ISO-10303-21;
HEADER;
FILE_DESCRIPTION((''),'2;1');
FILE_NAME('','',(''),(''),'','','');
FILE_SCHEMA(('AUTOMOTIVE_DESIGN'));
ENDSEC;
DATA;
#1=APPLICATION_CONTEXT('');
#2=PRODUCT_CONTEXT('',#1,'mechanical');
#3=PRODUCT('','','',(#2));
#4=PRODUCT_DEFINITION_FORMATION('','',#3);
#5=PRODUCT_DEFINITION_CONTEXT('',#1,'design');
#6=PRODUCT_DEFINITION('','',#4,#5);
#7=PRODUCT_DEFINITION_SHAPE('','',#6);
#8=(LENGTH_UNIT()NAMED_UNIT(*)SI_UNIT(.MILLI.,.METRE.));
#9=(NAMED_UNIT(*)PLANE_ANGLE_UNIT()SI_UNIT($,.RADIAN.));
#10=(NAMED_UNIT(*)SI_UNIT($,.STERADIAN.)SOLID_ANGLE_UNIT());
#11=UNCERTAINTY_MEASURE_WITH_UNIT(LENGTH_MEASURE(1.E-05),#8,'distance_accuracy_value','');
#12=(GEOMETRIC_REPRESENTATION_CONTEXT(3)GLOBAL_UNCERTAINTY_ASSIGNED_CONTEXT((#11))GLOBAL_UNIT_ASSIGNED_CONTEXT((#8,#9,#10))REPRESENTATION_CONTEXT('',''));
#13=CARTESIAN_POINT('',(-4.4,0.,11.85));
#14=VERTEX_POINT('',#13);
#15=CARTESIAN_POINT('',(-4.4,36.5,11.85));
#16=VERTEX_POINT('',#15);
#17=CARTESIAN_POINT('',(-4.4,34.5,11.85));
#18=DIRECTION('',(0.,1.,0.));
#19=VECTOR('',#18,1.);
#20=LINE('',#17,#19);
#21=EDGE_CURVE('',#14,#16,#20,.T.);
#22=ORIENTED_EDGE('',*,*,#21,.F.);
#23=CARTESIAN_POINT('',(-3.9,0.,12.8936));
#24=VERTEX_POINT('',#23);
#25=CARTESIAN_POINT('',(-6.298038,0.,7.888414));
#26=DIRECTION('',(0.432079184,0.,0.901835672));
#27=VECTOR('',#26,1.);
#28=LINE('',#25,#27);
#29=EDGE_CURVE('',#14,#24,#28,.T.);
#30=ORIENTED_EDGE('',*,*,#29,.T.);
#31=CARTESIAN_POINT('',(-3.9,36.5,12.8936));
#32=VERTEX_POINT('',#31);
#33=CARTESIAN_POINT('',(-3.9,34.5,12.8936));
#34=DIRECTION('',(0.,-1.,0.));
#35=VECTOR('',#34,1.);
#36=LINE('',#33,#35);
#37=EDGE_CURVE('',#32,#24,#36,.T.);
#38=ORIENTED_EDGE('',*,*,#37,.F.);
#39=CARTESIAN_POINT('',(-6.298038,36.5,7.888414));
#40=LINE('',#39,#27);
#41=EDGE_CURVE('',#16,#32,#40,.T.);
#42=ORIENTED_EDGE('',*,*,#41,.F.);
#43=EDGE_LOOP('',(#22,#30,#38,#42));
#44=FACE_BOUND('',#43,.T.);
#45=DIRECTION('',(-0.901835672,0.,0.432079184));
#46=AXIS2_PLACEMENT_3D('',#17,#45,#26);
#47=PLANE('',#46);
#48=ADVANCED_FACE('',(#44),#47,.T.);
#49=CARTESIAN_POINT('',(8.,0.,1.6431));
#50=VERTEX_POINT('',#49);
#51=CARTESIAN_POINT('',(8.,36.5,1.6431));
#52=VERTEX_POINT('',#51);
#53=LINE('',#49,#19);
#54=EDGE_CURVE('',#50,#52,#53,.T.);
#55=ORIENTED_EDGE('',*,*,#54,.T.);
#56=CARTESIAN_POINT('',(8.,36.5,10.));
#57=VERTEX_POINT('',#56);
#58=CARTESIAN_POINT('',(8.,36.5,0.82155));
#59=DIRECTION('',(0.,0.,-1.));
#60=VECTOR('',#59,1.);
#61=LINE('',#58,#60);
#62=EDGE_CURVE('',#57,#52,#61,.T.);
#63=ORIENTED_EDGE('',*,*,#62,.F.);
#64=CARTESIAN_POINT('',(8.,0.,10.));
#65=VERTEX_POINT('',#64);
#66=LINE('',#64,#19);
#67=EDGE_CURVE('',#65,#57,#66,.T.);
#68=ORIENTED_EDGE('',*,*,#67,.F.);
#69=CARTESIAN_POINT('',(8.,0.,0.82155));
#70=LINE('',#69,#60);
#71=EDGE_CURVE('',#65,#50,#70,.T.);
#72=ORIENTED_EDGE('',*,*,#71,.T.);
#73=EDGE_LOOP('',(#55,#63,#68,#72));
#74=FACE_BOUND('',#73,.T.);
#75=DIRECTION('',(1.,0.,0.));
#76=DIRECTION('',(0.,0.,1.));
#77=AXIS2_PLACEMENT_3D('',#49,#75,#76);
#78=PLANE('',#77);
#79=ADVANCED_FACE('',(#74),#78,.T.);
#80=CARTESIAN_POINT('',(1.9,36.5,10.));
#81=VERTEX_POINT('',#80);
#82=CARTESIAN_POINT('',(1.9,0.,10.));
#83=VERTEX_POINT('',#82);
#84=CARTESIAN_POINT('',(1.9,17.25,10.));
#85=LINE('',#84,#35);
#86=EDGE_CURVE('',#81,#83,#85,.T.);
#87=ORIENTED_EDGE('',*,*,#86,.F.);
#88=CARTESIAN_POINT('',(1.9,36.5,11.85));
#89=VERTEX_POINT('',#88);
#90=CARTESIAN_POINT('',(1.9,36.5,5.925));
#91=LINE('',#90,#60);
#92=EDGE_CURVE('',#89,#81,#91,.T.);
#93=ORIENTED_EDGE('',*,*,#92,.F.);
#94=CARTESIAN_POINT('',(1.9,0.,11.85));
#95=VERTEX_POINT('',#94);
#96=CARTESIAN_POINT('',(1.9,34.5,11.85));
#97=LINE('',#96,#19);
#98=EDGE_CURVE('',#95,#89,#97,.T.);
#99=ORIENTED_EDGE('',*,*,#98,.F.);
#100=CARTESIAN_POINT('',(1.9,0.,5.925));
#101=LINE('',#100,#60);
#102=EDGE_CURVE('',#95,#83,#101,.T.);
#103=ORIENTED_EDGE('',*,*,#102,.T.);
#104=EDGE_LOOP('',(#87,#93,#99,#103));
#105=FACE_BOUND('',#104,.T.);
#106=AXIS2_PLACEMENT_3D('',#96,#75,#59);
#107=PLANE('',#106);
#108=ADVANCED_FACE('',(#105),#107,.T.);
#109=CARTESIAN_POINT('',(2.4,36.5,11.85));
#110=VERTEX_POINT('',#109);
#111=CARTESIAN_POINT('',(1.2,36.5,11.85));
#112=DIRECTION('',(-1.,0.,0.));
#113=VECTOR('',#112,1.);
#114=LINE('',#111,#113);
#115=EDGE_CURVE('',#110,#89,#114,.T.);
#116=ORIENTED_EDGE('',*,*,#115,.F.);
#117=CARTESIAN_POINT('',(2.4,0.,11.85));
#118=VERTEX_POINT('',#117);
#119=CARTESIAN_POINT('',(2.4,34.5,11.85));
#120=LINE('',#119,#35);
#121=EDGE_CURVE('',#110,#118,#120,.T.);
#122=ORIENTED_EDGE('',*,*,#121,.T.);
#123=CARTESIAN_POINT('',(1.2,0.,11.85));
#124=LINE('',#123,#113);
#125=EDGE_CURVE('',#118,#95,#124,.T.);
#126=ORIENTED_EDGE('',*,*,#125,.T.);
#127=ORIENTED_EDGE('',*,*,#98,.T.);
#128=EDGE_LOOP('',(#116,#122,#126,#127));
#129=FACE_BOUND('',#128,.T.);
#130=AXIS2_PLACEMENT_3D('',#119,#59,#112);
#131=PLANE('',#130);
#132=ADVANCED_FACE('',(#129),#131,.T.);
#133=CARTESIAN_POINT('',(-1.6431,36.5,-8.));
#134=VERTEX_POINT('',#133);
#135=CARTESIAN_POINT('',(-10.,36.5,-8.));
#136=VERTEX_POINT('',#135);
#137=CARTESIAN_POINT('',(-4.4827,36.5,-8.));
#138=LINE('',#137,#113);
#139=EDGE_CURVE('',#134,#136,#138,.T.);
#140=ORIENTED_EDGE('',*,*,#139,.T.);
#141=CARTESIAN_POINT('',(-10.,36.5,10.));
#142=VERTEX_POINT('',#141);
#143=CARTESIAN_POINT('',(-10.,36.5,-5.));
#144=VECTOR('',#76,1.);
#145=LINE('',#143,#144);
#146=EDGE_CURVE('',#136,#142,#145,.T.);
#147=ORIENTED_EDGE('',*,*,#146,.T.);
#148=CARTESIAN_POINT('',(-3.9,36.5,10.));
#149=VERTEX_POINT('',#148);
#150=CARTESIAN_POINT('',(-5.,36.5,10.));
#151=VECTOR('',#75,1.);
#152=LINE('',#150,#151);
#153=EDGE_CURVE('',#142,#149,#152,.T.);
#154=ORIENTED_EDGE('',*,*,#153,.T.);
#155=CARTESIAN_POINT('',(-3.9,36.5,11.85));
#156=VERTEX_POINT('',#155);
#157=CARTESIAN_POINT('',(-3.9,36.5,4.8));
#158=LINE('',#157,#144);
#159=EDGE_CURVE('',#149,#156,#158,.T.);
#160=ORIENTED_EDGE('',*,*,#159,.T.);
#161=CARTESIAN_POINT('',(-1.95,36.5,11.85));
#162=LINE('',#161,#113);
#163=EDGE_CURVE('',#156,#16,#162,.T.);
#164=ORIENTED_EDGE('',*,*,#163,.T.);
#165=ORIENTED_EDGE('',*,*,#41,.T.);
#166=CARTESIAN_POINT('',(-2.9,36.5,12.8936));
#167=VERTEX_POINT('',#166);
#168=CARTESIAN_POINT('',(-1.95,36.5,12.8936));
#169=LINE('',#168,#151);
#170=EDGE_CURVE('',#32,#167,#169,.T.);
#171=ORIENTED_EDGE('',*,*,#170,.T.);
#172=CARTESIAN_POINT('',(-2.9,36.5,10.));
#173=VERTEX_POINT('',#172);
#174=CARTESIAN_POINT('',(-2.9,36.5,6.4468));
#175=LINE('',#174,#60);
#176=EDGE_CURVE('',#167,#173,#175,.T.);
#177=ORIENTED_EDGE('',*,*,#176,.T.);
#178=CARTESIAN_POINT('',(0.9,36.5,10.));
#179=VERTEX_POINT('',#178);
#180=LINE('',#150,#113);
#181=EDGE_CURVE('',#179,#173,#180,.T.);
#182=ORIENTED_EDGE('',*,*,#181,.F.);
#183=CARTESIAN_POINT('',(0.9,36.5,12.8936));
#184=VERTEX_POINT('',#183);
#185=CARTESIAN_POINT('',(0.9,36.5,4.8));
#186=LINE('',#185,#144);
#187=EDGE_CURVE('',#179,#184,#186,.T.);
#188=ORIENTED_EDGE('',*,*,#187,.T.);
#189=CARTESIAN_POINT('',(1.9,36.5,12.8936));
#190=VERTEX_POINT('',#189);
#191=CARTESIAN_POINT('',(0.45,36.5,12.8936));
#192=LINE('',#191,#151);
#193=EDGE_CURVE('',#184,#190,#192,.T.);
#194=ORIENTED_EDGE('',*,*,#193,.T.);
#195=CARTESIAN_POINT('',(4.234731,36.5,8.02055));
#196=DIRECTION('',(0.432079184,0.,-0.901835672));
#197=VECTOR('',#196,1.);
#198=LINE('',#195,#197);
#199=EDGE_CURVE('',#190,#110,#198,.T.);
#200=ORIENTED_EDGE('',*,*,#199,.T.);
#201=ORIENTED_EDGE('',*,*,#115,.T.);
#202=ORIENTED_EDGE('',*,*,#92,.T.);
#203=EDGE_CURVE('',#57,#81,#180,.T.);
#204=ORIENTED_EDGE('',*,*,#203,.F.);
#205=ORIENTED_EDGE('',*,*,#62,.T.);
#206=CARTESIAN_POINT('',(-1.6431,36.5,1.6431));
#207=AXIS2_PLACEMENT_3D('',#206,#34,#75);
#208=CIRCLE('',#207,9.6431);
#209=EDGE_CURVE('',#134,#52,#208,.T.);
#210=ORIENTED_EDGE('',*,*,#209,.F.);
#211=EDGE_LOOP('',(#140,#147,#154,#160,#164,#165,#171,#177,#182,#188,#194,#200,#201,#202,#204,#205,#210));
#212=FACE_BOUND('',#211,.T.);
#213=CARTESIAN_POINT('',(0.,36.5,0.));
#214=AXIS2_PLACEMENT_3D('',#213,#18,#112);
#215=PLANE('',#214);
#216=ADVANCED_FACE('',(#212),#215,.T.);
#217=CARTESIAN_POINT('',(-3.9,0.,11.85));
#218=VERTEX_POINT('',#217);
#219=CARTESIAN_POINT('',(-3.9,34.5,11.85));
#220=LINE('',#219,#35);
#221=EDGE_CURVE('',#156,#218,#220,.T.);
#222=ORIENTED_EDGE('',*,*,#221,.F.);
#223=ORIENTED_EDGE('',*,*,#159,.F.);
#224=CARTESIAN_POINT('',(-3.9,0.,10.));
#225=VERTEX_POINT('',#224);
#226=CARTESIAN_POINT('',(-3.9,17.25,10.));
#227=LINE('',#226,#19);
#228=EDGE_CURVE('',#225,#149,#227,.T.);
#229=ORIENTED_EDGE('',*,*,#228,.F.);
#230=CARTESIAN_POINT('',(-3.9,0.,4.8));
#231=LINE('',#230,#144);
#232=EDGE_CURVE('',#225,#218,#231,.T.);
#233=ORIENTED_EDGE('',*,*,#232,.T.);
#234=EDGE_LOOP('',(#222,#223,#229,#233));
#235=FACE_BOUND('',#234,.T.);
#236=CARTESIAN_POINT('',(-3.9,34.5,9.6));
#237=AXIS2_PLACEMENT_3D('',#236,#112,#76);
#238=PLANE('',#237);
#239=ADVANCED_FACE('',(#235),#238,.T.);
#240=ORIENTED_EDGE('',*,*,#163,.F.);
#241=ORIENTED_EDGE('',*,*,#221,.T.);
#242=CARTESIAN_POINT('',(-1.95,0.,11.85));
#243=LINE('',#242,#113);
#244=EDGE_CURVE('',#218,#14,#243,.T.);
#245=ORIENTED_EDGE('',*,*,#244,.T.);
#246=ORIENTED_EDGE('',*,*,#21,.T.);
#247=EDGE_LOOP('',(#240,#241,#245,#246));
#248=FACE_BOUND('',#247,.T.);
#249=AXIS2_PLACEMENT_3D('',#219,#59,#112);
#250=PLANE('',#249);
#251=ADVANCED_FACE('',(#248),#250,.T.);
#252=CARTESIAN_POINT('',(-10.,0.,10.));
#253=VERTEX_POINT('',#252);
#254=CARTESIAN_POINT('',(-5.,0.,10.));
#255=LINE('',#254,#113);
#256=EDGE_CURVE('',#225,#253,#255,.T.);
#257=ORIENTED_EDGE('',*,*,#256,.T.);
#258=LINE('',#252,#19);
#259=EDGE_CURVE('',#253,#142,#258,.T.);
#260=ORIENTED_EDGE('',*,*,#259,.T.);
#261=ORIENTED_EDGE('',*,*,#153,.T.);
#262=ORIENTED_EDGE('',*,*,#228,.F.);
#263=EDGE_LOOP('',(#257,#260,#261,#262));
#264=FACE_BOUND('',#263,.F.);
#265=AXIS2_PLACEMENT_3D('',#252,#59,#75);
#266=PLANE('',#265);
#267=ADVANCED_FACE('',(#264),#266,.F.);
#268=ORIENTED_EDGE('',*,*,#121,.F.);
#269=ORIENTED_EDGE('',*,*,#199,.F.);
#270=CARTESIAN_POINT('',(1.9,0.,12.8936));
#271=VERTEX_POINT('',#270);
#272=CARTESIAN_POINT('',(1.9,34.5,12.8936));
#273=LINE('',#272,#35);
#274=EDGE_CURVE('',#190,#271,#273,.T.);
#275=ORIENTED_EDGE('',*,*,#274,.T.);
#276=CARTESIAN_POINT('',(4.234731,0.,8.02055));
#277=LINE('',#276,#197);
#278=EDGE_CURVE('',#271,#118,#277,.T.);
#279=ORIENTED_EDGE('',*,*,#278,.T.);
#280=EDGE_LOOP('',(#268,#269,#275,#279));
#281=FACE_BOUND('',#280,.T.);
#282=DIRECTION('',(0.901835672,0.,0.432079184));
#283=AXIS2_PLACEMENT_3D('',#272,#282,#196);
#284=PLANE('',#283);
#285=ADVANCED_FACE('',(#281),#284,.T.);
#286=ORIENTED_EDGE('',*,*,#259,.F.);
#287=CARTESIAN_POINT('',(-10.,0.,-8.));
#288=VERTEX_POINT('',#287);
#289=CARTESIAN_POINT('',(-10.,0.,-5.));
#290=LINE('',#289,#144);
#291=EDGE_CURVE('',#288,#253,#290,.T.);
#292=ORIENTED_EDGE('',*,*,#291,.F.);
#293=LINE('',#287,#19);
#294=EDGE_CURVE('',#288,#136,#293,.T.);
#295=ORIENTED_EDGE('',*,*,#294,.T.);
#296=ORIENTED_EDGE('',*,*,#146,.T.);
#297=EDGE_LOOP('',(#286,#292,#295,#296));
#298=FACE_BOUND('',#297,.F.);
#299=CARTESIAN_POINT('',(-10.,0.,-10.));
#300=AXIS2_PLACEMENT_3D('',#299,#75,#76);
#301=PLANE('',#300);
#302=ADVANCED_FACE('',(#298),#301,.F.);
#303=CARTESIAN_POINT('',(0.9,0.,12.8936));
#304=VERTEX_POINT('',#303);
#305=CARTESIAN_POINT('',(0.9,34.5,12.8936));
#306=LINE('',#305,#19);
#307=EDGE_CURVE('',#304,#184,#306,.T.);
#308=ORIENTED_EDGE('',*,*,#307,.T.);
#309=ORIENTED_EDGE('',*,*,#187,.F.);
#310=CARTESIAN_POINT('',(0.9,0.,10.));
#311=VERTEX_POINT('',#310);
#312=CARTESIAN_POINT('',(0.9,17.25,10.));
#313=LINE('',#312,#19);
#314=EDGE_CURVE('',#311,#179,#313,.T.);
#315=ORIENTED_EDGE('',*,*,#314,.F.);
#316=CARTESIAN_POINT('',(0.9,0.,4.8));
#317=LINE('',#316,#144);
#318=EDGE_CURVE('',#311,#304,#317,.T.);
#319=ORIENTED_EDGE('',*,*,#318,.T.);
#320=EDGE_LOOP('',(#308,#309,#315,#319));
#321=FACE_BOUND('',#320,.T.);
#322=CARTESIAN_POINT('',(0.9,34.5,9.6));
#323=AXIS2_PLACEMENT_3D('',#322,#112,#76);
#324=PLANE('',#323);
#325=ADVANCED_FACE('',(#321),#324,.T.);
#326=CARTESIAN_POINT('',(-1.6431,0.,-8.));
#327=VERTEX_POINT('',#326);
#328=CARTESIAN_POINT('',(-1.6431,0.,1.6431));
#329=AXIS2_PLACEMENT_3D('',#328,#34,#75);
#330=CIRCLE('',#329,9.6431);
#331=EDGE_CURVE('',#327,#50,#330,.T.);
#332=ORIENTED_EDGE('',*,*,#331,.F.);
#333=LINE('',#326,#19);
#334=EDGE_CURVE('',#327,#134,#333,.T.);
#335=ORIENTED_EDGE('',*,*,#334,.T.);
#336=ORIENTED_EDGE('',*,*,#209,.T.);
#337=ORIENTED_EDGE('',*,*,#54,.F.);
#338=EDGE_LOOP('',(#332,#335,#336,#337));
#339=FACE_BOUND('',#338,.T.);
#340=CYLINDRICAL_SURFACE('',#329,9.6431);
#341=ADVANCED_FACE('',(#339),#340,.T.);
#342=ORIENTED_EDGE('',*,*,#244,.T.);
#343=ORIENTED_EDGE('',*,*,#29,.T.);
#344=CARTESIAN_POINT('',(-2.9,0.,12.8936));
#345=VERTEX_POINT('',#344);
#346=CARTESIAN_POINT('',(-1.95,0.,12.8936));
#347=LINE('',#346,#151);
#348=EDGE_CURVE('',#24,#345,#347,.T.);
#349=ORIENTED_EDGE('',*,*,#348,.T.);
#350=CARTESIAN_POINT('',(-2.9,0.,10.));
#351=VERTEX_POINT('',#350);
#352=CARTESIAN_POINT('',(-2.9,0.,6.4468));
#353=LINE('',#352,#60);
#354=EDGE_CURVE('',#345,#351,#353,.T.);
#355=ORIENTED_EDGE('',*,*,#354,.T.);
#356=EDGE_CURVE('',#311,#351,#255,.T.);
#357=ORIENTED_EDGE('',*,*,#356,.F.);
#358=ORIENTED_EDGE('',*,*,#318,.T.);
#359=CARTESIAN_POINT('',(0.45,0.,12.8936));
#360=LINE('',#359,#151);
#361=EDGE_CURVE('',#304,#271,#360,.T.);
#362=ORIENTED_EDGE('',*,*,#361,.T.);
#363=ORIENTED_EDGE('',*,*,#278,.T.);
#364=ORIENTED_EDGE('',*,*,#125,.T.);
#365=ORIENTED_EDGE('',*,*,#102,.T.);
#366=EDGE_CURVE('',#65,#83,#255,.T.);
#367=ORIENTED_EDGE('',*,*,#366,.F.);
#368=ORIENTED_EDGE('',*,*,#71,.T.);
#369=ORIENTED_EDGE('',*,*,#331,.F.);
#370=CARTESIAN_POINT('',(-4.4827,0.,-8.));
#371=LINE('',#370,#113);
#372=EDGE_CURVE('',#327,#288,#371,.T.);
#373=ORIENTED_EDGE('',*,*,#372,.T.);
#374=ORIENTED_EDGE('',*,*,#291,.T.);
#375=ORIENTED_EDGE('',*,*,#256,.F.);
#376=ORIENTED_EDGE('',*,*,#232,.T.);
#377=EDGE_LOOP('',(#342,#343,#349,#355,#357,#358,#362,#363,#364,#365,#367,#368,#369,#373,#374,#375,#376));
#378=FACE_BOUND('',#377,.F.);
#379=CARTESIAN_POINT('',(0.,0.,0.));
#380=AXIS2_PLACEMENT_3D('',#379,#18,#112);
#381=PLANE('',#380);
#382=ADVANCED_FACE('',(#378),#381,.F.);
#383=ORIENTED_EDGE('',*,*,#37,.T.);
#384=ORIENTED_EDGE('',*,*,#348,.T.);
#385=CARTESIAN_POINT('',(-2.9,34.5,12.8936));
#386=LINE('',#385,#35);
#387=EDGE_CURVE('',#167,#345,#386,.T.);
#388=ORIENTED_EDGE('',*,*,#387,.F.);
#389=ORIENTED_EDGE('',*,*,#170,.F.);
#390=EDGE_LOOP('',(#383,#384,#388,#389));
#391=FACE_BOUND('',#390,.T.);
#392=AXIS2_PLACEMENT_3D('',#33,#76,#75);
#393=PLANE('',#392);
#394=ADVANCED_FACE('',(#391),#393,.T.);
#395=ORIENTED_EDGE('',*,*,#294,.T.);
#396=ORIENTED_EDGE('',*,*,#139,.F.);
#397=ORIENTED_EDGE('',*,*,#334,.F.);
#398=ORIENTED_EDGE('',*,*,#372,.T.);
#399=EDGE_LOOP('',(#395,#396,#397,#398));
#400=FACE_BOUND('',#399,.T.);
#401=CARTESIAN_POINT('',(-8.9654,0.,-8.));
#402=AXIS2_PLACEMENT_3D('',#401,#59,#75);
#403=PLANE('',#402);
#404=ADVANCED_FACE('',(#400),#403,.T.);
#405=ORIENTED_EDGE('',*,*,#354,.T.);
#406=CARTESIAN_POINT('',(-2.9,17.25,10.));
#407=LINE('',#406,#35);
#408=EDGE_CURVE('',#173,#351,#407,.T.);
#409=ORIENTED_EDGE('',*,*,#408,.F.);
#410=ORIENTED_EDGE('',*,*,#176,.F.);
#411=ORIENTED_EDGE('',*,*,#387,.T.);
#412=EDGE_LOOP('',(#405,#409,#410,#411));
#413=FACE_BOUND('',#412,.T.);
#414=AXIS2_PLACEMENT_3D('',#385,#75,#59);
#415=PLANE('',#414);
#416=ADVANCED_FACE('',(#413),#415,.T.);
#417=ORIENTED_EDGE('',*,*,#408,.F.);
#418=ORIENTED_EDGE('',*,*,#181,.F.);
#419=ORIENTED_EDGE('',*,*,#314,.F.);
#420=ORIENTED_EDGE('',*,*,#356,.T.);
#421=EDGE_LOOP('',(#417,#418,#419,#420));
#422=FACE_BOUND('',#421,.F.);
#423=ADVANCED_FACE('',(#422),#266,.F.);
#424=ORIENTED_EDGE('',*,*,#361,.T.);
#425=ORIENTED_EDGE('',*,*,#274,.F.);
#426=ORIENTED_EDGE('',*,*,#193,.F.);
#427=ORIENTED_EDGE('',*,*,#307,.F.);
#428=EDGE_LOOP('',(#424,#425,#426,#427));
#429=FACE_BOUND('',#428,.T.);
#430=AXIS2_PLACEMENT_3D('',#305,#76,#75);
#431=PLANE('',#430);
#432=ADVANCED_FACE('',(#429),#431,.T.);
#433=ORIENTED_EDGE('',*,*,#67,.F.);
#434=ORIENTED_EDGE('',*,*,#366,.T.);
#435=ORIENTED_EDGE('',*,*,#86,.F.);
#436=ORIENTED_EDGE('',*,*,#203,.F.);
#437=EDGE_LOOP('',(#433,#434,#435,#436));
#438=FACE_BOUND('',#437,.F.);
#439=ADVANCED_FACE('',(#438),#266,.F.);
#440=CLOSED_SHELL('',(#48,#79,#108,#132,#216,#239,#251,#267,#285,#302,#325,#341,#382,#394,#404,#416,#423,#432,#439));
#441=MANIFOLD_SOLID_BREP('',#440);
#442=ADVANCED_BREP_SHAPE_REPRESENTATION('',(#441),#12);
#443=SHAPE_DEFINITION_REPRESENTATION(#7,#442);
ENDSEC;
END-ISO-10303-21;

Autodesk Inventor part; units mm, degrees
ref_plane "YZ Plane" through (0, 0, 0) normal (1, 0, 0) x (0, 1, 0)
ref_plane "XZ Plane" through (0, 0, 0) normal (0, 1, 0) x (-1, 0, 0)
ref_plane "XY Plane" through (0, 0, 0) normal (0, 0, 1) x (1, 0, 0)
sketch "Skizze1" plane through (0, 0, 0) normal (0, 1, 0) x (-1, 0, 0)
  line L0 (10, 10) -> (-10, 10)
  line L1 (-10, 10) -> (-10, -10)
  line L2 (-10, -10) -> (10, -10)
  line L3 (10, -10) -> (10, 10)
  line L4 (10, 10) -> (-10, -10) construction
  line L5 (-10, 10) -> (10, -10) construction
  point P0 (0, 0)
  dimension "d0" = 20
  dimension "d1" = 20
extrude "Extrusion1" add sketch "Skizze1" along normal blind 34.5
sketch "Skizze2" plane through (0, 0, 0) normal (0, -1, 0) x (1, 0, 0)
  line L0 (-8.9654, -8) -> (-1.6431, -8)
  line L1 (8, 1.6431) -> (8, 9.2)
  line L2 (-10, 10) -> (10, 10)
  line L3 (-10, -10) -> (-10, 10)
  line L4 (8, 10) -> (-10, 10)
  line L5 (-10, 10) -> (-10, -8)
  line L6 (-10, -8) -> (8, -8)
  line L7 (8, -8) -> (8, 10)
  line L8 (10, 10) -> (10, -10)
  line L9 (-10, 10) -> (10, 10)
  line L10 (-10, -10) -> (-10, 10)
  line L11 (10, -10) -> (-10, -10)
  circle A0 centre (-1.6431, 1.6431) radius 9.6431
  point P0 (0, 0)
extrude "Extrusion2" cut sketch "Skizze2" against normal through all contours L0 L6 L7 L1 L2 L8 L11 L3 | A0 L7 L6
sketch "Skizze3" plane through (0, 34.5, 0) normal (0, 1, 0) x (1, 0, 0)
  line L0 (0.9, -9.6) -> (0.9, -12.8936) projected
  line L1 (0.9, -12.8936) -> (1.9, -12.8936) projected
  line L2 (1.9, -12.8936) -> (2.4, -11.85) projected
  line L3 (2.4, -11.85) -> (1.9, -11.85) projected
  line L4 (1.9, -12.8936) -> (1.9, -9.6) projected
  line L5 (-2.9, -12.8936) -> (-2.9, -9.6) projected
  line L6 (-3.9, -9.6) -> (-3.9, -12.8936) projected
  line L7 (-3.9, -11.85) -> (-4.4, -11.85) projected
  line L8 (-4.4, -11.85) -> (-3.9, -12.8936) projected
  line L9 (-3.9, -12.8936) -> (-2.9, -12.8936) projected
  line L10 (0.9, -12.8936) -> (1.9, -12.8936)
  line L11 (1.9, -12.8936) -> (1.9, -9.6)
  line L12 (1.9, -9.6) -> (0.9, -9.6)
  line L13 (0.9, -9.6) -> (0.9, -12.8936)
  line L14 (-2.9, -12.8936) -> (-3.9, -12.8936)
  line L15 (-3.9, -12.8936) -> (-3.9, -9.6)
  line L16 (-3.9, -9.6) -> (-2.9, -9.6)
  line L17 (-2.9, -9.6) -> (-2.9, -12.8936)
  point P0 (0, 0)
extrude "Extrusion3" add sketch "Skizze3" against normal up to surface (34.5 mm away)
move faces "Verschieben1" translate (0, 2, 0) faces at (-5.181, 34.5, -2)
properties part number "Blank"
